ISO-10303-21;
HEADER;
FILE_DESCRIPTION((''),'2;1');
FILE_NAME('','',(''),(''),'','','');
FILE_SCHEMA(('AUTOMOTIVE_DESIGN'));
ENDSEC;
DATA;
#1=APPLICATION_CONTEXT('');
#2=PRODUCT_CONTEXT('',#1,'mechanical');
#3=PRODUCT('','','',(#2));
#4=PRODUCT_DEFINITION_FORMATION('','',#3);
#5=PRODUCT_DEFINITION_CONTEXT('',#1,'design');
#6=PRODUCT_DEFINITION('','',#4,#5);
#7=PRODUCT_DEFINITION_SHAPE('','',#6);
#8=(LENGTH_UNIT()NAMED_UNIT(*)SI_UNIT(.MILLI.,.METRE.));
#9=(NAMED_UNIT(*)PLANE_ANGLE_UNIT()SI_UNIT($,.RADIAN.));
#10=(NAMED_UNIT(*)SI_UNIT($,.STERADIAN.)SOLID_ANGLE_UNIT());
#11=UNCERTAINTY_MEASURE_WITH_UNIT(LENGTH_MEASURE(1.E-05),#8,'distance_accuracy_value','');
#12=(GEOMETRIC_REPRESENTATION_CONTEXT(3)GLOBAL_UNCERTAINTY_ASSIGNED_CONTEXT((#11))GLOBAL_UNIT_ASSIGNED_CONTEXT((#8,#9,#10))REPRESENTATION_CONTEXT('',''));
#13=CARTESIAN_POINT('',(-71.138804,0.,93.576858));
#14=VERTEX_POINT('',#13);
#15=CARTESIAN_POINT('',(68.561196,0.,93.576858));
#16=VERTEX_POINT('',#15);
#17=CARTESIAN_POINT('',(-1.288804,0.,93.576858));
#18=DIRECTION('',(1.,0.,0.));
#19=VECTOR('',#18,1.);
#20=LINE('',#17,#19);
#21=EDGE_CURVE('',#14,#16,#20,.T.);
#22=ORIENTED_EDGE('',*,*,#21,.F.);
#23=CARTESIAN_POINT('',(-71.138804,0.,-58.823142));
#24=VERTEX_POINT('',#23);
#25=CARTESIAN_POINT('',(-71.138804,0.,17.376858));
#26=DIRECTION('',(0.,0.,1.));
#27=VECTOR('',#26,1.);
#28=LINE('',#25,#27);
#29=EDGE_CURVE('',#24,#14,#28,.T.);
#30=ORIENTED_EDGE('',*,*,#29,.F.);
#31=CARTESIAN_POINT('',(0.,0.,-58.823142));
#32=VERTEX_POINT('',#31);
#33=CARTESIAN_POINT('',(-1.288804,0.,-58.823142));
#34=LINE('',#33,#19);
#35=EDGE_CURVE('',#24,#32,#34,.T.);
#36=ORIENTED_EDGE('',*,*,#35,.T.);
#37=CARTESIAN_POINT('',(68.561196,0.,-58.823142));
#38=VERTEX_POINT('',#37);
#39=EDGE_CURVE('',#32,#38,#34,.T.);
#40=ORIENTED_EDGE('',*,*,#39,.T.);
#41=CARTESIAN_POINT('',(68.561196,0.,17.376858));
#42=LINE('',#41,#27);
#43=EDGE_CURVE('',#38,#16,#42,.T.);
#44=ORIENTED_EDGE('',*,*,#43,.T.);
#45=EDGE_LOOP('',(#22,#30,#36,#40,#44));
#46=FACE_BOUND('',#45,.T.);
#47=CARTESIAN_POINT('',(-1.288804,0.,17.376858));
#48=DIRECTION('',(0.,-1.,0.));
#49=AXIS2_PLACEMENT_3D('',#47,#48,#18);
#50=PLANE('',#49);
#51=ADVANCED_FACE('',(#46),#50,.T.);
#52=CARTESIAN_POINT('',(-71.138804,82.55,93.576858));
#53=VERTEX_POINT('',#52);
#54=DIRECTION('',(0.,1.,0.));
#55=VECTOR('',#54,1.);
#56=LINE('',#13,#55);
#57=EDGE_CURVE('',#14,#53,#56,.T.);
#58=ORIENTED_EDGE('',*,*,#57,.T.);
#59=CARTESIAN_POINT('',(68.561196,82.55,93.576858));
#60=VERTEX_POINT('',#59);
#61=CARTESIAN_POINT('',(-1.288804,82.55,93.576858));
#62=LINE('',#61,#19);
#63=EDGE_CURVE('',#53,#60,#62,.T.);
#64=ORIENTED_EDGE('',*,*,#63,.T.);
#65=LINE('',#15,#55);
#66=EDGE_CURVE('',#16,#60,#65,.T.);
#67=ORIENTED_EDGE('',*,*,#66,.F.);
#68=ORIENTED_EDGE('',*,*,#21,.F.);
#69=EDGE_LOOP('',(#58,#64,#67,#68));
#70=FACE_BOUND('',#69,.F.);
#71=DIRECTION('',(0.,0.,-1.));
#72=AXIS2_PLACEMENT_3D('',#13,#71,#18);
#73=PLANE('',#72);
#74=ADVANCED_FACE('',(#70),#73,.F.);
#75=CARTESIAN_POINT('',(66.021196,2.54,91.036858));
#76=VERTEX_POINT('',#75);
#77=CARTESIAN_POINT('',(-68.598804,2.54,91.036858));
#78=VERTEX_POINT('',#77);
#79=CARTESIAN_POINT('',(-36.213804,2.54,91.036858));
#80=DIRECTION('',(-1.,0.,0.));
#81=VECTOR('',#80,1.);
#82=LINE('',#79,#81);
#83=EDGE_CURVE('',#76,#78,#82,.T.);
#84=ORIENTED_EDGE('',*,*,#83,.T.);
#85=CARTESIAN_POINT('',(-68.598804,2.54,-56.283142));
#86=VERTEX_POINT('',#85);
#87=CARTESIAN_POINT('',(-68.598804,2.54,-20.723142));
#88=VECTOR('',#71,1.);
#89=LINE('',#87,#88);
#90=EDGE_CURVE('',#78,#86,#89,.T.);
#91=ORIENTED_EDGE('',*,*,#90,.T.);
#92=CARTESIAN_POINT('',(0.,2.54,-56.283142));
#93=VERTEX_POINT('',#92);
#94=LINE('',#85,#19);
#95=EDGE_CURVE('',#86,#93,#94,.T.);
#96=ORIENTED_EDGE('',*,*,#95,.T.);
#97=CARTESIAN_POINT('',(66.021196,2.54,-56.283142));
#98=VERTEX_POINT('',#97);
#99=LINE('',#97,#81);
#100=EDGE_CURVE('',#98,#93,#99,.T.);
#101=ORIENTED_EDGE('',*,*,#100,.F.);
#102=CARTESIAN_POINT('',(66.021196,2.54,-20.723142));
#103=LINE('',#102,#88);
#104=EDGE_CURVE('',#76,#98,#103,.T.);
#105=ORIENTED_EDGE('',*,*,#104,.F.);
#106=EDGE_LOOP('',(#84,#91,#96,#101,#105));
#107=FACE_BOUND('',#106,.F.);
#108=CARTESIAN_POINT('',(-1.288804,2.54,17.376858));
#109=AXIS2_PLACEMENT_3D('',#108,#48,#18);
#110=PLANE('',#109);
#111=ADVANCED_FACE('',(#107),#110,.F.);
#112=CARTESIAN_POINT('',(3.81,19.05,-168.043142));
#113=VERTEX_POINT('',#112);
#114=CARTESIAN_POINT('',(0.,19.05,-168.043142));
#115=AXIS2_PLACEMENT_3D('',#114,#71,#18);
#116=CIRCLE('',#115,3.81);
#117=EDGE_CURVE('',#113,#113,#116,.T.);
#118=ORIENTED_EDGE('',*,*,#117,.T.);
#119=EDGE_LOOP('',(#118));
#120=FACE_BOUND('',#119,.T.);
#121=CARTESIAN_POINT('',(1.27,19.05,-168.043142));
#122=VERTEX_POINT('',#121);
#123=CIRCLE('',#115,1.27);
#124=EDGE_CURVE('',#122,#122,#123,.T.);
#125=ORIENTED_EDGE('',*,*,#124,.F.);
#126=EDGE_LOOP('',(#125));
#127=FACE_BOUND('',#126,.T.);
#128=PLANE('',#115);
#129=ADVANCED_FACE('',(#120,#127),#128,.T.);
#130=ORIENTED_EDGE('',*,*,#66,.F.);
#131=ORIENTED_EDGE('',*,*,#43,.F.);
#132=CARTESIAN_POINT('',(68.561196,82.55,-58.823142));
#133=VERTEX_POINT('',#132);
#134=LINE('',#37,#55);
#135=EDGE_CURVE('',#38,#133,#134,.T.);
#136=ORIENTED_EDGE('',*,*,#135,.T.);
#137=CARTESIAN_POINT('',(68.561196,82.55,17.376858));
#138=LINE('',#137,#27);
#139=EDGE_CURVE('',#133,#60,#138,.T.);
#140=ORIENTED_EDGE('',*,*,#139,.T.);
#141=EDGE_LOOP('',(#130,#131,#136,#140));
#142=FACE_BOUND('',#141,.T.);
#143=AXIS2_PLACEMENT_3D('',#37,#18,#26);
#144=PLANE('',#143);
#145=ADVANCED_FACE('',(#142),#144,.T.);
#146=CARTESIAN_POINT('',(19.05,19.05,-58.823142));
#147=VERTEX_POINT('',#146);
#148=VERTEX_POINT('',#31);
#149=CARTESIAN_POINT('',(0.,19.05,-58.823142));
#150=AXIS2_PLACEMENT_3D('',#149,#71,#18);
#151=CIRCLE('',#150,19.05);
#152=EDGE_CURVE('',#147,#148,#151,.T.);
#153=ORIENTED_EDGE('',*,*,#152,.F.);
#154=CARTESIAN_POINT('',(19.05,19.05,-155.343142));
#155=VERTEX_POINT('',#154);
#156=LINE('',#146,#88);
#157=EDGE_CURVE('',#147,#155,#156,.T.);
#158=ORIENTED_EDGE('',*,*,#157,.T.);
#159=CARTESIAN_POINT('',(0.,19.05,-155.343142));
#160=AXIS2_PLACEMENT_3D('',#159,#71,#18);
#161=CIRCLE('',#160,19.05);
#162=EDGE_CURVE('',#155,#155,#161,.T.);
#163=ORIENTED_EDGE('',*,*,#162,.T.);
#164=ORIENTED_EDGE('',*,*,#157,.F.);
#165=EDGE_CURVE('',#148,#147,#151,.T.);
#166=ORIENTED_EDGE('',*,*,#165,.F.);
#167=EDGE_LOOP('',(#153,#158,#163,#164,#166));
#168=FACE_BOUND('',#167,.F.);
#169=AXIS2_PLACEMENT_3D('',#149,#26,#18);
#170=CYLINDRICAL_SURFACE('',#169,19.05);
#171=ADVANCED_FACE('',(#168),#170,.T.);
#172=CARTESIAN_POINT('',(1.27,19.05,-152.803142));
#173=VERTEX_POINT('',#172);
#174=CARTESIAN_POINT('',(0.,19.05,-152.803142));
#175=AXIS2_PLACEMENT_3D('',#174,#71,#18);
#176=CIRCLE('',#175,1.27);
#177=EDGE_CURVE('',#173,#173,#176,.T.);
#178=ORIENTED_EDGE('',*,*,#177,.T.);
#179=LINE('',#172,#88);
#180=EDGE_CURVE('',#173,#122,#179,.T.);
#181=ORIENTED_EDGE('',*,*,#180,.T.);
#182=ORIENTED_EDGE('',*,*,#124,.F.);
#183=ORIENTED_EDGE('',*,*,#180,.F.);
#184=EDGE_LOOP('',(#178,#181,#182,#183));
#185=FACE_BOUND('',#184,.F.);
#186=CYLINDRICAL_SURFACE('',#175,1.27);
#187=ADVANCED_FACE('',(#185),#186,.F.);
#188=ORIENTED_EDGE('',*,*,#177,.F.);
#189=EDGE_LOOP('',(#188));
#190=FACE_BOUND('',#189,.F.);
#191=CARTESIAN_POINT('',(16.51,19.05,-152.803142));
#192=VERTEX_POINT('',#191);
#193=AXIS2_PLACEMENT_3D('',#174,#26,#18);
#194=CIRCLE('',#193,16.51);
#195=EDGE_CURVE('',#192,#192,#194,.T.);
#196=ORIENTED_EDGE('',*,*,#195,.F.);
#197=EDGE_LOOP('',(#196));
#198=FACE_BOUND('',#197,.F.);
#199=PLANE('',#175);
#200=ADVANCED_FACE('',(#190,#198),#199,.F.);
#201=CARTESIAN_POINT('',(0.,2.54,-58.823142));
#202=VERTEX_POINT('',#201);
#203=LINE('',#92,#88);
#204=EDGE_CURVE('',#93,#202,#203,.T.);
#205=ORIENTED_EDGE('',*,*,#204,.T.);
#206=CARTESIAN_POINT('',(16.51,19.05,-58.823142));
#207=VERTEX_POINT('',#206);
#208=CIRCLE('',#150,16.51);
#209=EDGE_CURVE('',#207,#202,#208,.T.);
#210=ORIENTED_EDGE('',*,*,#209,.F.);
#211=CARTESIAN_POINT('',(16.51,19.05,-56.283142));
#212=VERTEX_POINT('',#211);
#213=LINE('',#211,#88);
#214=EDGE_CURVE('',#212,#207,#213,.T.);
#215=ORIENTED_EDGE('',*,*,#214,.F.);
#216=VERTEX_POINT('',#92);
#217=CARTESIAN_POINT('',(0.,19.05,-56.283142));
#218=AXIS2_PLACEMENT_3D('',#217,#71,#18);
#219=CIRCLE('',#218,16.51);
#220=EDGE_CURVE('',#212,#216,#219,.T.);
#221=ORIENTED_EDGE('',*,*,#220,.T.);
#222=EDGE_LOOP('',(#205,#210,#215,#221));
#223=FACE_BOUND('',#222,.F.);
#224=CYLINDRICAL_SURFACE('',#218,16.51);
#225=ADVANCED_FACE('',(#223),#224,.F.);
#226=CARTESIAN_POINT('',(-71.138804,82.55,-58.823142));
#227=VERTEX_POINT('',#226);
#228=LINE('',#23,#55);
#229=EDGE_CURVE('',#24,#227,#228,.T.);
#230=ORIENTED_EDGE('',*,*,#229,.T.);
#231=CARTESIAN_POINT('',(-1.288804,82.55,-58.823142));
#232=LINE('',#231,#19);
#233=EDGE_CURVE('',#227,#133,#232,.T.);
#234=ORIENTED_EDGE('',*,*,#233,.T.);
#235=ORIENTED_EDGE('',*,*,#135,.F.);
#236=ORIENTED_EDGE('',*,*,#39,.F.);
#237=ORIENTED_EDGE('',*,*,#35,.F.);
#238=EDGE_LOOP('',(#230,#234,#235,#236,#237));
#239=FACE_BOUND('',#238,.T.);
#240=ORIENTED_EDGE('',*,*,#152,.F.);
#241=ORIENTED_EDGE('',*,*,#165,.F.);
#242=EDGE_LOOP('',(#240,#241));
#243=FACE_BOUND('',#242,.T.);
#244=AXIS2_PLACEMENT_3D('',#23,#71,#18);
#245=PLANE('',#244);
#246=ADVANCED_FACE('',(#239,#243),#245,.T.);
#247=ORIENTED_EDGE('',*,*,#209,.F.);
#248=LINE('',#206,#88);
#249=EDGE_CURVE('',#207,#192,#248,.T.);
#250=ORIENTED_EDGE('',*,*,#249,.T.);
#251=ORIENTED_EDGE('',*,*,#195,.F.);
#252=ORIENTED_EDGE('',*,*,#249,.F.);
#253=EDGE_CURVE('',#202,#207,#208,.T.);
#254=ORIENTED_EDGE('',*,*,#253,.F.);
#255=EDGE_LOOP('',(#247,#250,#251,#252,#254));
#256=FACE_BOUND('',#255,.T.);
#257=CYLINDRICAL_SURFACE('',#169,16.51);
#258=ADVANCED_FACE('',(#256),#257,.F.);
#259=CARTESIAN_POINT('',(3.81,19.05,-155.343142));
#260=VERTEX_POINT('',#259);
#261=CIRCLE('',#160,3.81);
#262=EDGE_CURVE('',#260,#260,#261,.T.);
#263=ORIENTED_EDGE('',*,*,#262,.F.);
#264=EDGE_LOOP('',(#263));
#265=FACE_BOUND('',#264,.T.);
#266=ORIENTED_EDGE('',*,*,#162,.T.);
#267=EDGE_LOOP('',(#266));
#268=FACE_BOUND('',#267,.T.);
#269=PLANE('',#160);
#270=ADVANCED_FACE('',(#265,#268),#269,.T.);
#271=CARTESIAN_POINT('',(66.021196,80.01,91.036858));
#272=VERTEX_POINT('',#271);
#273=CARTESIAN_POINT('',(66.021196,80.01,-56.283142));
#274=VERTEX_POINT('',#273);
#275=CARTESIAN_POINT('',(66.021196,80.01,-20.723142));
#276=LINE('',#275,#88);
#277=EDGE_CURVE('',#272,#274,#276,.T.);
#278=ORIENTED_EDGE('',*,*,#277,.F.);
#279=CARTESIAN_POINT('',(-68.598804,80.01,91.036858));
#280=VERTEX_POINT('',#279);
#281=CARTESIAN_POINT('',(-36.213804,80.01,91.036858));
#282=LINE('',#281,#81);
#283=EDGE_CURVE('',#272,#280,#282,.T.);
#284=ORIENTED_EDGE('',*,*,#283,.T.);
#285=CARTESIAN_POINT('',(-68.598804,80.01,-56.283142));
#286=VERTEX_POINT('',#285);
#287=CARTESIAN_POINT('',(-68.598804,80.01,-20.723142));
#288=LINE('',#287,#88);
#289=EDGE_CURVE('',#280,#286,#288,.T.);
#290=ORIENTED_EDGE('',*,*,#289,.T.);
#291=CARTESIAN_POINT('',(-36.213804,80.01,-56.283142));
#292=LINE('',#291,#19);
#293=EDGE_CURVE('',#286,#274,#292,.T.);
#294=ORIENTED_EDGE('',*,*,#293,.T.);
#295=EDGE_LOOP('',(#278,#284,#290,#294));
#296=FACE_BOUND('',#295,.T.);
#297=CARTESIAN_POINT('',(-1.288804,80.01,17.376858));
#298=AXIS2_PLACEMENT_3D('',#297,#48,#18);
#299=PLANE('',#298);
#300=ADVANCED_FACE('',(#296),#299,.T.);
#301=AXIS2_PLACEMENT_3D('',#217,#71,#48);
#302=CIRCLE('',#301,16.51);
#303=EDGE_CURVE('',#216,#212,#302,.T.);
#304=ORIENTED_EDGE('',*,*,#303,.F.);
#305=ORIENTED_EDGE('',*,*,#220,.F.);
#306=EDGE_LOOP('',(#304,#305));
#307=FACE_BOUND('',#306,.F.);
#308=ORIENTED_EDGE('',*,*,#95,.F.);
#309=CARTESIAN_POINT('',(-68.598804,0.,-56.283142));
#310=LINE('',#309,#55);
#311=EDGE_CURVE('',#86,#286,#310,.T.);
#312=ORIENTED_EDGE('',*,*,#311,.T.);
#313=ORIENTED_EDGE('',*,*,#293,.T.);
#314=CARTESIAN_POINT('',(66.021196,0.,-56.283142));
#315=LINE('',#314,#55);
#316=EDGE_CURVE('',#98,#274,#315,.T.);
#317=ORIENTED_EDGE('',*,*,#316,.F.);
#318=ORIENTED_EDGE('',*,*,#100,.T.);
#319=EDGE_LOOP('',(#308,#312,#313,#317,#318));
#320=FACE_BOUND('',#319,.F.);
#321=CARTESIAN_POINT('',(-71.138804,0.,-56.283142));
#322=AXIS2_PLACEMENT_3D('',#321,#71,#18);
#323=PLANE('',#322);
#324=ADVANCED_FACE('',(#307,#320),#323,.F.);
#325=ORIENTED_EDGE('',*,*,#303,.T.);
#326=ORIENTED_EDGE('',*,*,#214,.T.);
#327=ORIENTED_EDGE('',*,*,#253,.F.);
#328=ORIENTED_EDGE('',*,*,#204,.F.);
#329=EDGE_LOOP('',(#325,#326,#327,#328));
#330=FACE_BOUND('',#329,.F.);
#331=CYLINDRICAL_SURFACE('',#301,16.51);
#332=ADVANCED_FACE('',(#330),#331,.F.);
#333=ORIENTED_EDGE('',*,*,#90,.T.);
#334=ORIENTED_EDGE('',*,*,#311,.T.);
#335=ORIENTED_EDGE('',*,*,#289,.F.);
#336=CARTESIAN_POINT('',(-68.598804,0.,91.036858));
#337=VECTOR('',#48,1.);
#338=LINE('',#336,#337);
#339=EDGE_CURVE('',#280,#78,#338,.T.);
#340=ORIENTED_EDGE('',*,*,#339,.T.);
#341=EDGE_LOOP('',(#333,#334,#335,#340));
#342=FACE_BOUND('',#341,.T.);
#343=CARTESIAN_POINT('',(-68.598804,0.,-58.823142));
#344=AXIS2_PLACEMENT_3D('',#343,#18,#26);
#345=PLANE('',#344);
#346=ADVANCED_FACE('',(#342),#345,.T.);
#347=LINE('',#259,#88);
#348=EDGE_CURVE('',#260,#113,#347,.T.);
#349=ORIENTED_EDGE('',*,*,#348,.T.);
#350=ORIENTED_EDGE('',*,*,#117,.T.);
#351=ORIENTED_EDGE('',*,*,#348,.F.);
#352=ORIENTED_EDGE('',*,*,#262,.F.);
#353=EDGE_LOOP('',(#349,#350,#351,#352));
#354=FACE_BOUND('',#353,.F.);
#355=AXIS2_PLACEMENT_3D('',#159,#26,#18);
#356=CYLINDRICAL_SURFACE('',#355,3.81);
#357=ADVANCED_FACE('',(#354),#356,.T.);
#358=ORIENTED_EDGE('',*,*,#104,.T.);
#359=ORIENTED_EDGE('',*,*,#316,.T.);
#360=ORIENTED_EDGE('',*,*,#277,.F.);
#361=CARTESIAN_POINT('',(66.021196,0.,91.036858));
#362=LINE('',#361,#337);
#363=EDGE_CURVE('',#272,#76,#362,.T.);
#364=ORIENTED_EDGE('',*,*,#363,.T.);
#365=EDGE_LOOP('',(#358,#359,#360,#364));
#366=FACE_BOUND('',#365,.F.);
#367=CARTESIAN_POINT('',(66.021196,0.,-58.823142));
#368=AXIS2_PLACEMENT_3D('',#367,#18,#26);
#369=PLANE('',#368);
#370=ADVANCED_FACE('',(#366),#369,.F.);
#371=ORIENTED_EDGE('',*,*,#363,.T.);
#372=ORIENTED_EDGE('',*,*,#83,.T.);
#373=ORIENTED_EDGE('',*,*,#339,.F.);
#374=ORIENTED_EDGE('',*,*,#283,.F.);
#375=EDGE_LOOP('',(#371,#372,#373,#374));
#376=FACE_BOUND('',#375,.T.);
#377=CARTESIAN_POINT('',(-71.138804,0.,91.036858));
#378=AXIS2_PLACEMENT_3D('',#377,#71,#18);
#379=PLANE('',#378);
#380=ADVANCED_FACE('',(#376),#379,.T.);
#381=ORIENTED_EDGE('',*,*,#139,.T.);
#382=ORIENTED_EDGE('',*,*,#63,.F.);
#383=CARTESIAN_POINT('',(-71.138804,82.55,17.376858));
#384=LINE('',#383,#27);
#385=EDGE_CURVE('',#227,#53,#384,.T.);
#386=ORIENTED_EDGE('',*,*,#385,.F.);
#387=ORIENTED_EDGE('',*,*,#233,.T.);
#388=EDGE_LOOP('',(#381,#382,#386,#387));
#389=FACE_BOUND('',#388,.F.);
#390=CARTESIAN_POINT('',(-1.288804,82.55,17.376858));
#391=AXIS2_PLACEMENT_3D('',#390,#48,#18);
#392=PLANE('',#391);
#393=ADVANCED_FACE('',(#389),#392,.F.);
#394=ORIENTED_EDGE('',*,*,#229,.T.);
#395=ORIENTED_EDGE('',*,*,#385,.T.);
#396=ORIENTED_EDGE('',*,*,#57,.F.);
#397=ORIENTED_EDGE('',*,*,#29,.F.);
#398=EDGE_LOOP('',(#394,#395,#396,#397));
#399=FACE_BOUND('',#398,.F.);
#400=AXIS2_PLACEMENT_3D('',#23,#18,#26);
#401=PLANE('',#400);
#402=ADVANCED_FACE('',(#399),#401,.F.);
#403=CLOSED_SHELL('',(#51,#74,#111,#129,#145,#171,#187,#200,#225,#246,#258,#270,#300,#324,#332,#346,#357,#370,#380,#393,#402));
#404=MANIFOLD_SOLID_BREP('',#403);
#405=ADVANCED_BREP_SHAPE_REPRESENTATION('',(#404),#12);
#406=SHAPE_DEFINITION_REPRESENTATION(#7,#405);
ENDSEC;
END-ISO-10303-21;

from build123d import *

# Parameters (mm, degrees)
F0_W        = 139.7
F0_H        = 152.4
F1_DEPTH    = 82.55
F2_R        = 19.05
F3_DEPTH    = 96.52
F4_R        = 3.81
F5_DEPTH    = 12.7
F6_T        = 2.54
F6_T4_ANGLE = 270.000000001
F6_T6_ANGLE = 90.000000001


# Not quite as in the source:
# - a shell that OpenCascade refuses in one call is made with other operations: the cavity is built on its own and cut out


with BuildPart() as f1:
    # F0 (on Front) → F1 (new body)
    with BuildSketch(Plane.XZ):
        with Locations((-1.2888036728, 17.3768577993)):
            Rectangle(F0_W, F0_H)
    extrude(amount=-F1_DEPTH)

    # F2 (on face) → F3 (join)
    with BuildSketch(Plane(origin=(0, 0, -58.8231422007), x_dir=(1, 0, 0), z_dir=(0, 0, -1))):
        with Locations((0, -19.05)):
            Circle(F2_R)
    extrude(amount=F3_DEPTH)

    # F4 (on face) → F5 (join)
    with BuildSketch(Plane(origin=(0, 0, -155.3431422007), x_dir=(1, 0, 0), z_dir=(0, 0, -1))):
        with Locations((0, -19.05)):
            Circle(F4_R)
    extrude(amount=F5_DEPTH)

    # F6: shell of thickness 2.54, made by hand


with BuildPart() as f6_core1:
    # F6_t2: copy of F1
    add(f1.part)

    # the walls: a layer under each face that stays
    f6_faces = [f6_core1.faces().sort_by_distance(p)[0] for p in [
        (-1.2888036728, 41.275, 93.5768577993),
        (68.5611963272, 41.275, 17.3768577993),
        (-71.1388036728, 41.275, 17.3768577993),
        (-1.2888036728, 0, 17.3768577993),
        (-1.2888036728, 82.55, 17.3768577993),
        (-1.2888036728, 41.275, -58.8231422007),
        (-19.05, 19.05, -107.0831422007),
        (-12.7, 31.75, -155.3431422007),
        (-3.81, 19.05, -161.6931422007),
    ]]
    thicken(f6_faces, amount=-F6_T, mode=Mode.SUBTRACT)

    # F6_s3 → F6_t4 (revolve, cut)
    with BuildSketch(Plane.YZ):
        Polygon((-0.0254, -58.8485422007), (0, -56.2831422007), (2.54, -56.2831422007), (2.54, -58.8231422007), align=None)
    revolve(axis=Axis((0, 19.05, -58.8231422007), (0, 0, -1)), revolution_arc=F6_T4_ANGLE, mode=Mode.SUBTRACT)

    # F6_s5 → F6_t6 (revolve, cut)
    with BuildSketch(Plane.XZ.offset(-19.05)):
        Polygon((19.0754, -58.8485422007), (19.05, -56.2831422007), (16.51, -56.2831422007), (16.51, -58.8231422007), align=None)
    revolve(axis=Axis((0, 19.05, -58.8231422007), (0, 0, -1)), revolution_arc=F6_T6_ANGLE, mode=Mode.SUBTRACT)

    # F6_s7 → F6_t8 (revolve, cut)
    with BuildSketch(Plane.XZ.offset(-19.05)):
        Polygon((3.8354, -155.3685422007), (3.81, -152.8031422007), (1.27, -152.8031422007), (1.27, -155.3431422007), align=None)
    revolve(axis=Axis((0, 19.05, -155.3431422007), (0, 0, -1)), mode=Mode.SUBTRACT)


with BuildPart() as f1_1:
    add(f1.part)

    # what is left inside the walls is the cavity
    f6_cavity = [f6_core1.part.solids().sort_by_distance(p)[0] for p in [
        (-1.288804, 79.9846, -7.176476),
    ]]
    add(f6_cavity, mode=Mode.SUBTRACT)


solid = f1_1.part
